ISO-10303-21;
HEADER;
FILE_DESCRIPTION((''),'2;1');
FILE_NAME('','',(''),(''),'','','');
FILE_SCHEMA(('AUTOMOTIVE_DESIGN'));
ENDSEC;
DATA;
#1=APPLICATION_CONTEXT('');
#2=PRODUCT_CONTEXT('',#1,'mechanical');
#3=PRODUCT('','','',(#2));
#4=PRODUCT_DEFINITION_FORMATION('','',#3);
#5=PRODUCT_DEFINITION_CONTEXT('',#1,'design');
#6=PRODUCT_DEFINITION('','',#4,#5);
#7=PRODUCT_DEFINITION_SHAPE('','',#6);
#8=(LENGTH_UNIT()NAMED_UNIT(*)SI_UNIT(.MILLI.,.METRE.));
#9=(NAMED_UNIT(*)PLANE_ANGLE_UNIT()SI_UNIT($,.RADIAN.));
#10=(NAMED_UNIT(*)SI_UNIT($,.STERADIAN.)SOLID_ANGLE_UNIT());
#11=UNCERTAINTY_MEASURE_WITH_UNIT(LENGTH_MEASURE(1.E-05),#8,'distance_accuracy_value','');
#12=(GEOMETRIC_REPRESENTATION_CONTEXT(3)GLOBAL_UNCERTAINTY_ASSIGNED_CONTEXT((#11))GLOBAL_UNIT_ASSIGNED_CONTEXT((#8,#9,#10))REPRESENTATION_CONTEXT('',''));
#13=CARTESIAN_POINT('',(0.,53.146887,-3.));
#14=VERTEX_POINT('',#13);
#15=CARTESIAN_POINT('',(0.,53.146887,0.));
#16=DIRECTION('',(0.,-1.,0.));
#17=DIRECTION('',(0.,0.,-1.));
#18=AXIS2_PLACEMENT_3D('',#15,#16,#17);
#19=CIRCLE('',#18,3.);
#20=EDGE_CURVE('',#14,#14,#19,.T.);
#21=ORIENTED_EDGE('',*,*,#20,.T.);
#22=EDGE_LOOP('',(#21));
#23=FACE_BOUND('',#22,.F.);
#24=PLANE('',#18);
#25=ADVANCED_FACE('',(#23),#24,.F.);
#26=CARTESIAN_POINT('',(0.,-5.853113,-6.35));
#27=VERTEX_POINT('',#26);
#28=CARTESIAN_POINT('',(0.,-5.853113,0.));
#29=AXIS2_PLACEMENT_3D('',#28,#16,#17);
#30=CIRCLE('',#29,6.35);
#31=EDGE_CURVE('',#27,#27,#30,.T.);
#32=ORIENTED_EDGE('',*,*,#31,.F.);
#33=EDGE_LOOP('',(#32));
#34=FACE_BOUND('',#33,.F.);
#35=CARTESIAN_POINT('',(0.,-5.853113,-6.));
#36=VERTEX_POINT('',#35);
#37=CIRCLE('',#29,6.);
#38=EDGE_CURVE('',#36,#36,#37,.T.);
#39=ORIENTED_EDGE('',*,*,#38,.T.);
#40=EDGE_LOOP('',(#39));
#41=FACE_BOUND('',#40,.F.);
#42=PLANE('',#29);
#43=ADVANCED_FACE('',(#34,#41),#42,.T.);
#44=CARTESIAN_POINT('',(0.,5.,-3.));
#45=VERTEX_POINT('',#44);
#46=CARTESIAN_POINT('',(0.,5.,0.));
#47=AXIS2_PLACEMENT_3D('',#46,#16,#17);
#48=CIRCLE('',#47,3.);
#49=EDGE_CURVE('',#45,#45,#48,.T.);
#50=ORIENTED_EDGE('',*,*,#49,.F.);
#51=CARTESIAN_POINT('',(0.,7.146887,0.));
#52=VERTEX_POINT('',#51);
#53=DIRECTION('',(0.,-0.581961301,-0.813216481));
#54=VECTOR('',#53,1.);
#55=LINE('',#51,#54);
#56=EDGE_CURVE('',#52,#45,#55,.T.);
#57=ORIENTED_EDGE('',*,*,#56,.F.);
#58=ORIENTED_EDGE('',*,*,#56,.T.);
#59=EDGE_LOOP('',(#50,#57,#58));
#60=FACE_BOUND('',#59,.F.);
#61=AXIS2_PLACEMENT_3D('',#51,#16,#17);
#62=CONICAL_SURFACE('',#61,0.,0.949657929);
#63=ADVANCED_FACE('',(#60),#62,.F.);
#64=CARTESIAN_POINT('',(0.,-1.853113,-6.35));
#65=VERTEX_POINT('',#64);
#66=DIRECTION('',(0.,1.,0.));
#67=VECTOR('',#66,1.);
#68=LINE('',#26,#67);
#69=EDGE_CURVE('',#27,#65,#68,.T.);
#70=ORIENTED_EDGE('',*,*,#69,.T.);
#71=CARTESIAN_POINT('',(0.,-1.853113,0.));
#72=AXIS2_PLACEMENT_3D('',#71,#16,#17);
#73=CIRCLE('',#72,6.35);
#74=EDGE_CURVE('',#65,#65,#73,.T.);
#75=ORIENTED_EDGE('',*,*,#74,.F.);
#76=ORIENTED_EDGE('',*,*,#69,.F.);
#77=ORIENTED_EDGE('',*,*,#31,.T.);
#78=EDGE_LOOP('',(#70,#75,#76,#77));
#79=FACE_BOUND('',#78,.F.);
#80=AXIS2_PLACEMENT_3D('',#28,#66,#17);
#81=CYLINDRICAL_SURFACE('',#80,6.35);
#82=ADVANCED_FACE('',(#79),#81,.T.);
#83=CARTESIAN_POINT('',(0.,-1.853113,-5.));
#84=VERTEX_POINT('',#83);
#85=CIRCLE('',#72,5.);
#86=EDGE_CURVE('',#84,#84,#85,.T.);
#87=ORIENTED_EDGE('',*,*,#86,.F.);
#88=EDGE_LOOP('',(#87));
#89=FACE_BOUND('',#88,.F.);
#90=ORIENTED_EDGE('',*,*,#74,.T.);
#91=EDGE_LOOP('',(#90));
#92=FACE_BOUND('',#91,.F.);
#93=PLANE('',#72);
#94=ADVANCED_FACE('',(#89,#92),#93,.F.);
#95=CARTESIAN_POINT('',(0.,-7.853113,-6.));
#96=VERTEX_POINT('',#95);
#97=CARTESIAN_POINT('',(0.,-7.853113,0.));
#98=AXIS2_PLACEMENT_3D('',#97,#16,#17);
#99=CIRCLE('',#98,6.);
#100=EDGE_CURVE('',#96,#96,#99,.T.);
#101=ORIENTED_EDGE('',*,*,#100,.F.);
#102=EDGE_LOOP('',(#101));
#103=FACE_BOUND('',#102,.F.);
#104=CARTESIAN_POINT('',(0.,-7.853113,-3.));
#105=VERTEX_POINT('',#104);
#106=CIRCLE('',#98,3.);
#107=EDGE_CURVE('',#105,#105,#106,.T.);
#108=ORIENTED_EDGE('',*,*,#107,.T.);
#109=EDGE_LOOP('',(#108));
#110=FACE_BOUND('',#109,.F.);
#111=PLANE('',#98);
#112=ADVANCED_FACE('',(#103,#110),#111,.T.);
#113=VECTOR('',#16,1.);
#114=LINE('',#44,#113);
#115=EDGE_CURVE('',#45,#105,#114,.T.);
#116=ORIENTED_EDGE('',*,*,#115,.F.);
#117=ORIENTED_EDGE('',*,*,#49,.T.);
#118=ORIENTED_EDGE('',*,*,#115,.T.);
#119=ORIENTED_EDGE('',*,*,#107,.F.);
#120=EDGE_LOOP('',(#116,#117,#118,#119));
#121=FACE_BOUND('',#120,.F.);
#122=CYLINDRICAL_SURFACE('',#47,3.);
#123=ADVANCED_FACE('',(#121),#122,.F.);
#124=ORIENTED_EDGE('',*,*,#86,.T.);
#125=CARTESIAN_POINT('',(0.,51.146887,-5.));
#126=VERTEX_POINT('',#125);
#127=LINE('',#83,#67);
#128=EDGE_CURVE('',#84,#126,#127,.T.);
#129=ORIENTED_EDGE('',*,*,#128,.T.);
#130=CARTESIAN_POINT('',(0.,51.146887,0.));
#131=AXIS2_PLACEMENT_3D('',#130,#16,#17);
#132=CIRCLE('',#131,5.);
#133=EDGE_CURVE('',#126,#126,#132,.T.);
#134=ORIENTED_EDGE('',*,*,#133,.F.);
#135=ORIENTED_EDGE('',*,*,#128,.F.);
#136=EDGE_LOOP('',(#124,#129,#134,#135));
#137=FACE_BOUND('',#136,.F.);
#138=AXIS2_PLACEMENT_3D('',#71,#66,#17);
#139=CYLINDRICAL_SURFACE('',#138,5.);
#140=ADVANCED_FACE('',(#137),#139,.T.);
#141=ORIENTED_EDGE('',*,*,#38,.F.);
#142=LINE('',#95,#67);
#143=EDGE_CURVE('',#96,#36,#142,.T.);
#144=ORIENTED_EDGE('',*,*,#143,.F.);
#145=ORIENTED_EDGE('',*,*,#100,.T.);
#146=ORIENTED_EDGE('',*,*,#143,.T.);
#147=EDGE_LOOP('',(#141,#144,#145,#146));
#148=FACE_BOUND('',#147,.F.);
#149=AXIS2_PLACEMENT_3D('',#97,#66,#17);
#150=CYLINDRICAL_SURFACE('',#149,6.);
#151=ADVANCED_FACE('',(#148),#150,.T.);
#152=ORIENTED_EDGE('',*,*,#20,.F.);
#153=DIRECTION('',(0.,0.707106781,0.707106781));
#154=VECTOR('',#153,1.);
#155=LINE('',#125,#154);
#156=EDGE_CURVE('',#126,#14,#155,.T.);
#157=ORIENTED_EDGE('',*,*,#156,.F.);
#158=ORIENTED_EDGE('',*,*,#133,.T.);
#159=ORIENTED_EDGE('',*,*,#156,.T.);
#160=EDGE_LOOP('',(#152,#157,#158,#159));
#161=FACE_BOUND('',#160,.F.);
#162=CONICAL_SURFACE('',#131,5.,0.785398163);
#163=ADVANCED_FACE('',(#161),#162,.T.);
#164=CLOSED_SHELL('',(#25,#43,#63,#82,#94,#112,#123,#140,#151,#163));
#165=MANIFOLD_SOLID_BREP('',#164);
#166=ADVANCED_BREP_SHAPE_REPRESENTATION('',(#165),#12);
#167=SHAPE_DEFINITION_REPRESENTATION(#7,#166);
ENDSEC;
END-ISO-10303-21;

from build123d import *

# Parameters (mm, degrees)
F3_SIZE2 = 2
F3_SIZE  = 2


# Not quite as in the source:
# - a feature names something its author has since deleted; it is built from what else it names


with BuildPart() as f1:
    # F0 (on Right) → F1 (revolve)
    with BuildSketch(Plane.YZ):
        Polygon((-7.8531129844, -6), (-5.8531129844, -6), (-5.8531129844, -6.35), (-1.8531129844, -6.35), (-1.8531129844, -5), (45.1962463558, -5), (53.1468870156, -5), (53.1468870156, 0), (7.1468870156, 0), (5, -3), (-7.8531129844, -3), (-7.8531129844, -5.5), align=None)
    revolve(axis=Axis((0, 30.1468870156, 0), (0, -1, 0)))

    # F3
    f3_edges = [f1.edges().sort_by_distance(p)[0] for p in [
        (0, 53.146887, 5),
    ]]
    chamfer(f3_edges, length=F3_SIZE, length2=F3_SIZE2)


solid = f1.part
